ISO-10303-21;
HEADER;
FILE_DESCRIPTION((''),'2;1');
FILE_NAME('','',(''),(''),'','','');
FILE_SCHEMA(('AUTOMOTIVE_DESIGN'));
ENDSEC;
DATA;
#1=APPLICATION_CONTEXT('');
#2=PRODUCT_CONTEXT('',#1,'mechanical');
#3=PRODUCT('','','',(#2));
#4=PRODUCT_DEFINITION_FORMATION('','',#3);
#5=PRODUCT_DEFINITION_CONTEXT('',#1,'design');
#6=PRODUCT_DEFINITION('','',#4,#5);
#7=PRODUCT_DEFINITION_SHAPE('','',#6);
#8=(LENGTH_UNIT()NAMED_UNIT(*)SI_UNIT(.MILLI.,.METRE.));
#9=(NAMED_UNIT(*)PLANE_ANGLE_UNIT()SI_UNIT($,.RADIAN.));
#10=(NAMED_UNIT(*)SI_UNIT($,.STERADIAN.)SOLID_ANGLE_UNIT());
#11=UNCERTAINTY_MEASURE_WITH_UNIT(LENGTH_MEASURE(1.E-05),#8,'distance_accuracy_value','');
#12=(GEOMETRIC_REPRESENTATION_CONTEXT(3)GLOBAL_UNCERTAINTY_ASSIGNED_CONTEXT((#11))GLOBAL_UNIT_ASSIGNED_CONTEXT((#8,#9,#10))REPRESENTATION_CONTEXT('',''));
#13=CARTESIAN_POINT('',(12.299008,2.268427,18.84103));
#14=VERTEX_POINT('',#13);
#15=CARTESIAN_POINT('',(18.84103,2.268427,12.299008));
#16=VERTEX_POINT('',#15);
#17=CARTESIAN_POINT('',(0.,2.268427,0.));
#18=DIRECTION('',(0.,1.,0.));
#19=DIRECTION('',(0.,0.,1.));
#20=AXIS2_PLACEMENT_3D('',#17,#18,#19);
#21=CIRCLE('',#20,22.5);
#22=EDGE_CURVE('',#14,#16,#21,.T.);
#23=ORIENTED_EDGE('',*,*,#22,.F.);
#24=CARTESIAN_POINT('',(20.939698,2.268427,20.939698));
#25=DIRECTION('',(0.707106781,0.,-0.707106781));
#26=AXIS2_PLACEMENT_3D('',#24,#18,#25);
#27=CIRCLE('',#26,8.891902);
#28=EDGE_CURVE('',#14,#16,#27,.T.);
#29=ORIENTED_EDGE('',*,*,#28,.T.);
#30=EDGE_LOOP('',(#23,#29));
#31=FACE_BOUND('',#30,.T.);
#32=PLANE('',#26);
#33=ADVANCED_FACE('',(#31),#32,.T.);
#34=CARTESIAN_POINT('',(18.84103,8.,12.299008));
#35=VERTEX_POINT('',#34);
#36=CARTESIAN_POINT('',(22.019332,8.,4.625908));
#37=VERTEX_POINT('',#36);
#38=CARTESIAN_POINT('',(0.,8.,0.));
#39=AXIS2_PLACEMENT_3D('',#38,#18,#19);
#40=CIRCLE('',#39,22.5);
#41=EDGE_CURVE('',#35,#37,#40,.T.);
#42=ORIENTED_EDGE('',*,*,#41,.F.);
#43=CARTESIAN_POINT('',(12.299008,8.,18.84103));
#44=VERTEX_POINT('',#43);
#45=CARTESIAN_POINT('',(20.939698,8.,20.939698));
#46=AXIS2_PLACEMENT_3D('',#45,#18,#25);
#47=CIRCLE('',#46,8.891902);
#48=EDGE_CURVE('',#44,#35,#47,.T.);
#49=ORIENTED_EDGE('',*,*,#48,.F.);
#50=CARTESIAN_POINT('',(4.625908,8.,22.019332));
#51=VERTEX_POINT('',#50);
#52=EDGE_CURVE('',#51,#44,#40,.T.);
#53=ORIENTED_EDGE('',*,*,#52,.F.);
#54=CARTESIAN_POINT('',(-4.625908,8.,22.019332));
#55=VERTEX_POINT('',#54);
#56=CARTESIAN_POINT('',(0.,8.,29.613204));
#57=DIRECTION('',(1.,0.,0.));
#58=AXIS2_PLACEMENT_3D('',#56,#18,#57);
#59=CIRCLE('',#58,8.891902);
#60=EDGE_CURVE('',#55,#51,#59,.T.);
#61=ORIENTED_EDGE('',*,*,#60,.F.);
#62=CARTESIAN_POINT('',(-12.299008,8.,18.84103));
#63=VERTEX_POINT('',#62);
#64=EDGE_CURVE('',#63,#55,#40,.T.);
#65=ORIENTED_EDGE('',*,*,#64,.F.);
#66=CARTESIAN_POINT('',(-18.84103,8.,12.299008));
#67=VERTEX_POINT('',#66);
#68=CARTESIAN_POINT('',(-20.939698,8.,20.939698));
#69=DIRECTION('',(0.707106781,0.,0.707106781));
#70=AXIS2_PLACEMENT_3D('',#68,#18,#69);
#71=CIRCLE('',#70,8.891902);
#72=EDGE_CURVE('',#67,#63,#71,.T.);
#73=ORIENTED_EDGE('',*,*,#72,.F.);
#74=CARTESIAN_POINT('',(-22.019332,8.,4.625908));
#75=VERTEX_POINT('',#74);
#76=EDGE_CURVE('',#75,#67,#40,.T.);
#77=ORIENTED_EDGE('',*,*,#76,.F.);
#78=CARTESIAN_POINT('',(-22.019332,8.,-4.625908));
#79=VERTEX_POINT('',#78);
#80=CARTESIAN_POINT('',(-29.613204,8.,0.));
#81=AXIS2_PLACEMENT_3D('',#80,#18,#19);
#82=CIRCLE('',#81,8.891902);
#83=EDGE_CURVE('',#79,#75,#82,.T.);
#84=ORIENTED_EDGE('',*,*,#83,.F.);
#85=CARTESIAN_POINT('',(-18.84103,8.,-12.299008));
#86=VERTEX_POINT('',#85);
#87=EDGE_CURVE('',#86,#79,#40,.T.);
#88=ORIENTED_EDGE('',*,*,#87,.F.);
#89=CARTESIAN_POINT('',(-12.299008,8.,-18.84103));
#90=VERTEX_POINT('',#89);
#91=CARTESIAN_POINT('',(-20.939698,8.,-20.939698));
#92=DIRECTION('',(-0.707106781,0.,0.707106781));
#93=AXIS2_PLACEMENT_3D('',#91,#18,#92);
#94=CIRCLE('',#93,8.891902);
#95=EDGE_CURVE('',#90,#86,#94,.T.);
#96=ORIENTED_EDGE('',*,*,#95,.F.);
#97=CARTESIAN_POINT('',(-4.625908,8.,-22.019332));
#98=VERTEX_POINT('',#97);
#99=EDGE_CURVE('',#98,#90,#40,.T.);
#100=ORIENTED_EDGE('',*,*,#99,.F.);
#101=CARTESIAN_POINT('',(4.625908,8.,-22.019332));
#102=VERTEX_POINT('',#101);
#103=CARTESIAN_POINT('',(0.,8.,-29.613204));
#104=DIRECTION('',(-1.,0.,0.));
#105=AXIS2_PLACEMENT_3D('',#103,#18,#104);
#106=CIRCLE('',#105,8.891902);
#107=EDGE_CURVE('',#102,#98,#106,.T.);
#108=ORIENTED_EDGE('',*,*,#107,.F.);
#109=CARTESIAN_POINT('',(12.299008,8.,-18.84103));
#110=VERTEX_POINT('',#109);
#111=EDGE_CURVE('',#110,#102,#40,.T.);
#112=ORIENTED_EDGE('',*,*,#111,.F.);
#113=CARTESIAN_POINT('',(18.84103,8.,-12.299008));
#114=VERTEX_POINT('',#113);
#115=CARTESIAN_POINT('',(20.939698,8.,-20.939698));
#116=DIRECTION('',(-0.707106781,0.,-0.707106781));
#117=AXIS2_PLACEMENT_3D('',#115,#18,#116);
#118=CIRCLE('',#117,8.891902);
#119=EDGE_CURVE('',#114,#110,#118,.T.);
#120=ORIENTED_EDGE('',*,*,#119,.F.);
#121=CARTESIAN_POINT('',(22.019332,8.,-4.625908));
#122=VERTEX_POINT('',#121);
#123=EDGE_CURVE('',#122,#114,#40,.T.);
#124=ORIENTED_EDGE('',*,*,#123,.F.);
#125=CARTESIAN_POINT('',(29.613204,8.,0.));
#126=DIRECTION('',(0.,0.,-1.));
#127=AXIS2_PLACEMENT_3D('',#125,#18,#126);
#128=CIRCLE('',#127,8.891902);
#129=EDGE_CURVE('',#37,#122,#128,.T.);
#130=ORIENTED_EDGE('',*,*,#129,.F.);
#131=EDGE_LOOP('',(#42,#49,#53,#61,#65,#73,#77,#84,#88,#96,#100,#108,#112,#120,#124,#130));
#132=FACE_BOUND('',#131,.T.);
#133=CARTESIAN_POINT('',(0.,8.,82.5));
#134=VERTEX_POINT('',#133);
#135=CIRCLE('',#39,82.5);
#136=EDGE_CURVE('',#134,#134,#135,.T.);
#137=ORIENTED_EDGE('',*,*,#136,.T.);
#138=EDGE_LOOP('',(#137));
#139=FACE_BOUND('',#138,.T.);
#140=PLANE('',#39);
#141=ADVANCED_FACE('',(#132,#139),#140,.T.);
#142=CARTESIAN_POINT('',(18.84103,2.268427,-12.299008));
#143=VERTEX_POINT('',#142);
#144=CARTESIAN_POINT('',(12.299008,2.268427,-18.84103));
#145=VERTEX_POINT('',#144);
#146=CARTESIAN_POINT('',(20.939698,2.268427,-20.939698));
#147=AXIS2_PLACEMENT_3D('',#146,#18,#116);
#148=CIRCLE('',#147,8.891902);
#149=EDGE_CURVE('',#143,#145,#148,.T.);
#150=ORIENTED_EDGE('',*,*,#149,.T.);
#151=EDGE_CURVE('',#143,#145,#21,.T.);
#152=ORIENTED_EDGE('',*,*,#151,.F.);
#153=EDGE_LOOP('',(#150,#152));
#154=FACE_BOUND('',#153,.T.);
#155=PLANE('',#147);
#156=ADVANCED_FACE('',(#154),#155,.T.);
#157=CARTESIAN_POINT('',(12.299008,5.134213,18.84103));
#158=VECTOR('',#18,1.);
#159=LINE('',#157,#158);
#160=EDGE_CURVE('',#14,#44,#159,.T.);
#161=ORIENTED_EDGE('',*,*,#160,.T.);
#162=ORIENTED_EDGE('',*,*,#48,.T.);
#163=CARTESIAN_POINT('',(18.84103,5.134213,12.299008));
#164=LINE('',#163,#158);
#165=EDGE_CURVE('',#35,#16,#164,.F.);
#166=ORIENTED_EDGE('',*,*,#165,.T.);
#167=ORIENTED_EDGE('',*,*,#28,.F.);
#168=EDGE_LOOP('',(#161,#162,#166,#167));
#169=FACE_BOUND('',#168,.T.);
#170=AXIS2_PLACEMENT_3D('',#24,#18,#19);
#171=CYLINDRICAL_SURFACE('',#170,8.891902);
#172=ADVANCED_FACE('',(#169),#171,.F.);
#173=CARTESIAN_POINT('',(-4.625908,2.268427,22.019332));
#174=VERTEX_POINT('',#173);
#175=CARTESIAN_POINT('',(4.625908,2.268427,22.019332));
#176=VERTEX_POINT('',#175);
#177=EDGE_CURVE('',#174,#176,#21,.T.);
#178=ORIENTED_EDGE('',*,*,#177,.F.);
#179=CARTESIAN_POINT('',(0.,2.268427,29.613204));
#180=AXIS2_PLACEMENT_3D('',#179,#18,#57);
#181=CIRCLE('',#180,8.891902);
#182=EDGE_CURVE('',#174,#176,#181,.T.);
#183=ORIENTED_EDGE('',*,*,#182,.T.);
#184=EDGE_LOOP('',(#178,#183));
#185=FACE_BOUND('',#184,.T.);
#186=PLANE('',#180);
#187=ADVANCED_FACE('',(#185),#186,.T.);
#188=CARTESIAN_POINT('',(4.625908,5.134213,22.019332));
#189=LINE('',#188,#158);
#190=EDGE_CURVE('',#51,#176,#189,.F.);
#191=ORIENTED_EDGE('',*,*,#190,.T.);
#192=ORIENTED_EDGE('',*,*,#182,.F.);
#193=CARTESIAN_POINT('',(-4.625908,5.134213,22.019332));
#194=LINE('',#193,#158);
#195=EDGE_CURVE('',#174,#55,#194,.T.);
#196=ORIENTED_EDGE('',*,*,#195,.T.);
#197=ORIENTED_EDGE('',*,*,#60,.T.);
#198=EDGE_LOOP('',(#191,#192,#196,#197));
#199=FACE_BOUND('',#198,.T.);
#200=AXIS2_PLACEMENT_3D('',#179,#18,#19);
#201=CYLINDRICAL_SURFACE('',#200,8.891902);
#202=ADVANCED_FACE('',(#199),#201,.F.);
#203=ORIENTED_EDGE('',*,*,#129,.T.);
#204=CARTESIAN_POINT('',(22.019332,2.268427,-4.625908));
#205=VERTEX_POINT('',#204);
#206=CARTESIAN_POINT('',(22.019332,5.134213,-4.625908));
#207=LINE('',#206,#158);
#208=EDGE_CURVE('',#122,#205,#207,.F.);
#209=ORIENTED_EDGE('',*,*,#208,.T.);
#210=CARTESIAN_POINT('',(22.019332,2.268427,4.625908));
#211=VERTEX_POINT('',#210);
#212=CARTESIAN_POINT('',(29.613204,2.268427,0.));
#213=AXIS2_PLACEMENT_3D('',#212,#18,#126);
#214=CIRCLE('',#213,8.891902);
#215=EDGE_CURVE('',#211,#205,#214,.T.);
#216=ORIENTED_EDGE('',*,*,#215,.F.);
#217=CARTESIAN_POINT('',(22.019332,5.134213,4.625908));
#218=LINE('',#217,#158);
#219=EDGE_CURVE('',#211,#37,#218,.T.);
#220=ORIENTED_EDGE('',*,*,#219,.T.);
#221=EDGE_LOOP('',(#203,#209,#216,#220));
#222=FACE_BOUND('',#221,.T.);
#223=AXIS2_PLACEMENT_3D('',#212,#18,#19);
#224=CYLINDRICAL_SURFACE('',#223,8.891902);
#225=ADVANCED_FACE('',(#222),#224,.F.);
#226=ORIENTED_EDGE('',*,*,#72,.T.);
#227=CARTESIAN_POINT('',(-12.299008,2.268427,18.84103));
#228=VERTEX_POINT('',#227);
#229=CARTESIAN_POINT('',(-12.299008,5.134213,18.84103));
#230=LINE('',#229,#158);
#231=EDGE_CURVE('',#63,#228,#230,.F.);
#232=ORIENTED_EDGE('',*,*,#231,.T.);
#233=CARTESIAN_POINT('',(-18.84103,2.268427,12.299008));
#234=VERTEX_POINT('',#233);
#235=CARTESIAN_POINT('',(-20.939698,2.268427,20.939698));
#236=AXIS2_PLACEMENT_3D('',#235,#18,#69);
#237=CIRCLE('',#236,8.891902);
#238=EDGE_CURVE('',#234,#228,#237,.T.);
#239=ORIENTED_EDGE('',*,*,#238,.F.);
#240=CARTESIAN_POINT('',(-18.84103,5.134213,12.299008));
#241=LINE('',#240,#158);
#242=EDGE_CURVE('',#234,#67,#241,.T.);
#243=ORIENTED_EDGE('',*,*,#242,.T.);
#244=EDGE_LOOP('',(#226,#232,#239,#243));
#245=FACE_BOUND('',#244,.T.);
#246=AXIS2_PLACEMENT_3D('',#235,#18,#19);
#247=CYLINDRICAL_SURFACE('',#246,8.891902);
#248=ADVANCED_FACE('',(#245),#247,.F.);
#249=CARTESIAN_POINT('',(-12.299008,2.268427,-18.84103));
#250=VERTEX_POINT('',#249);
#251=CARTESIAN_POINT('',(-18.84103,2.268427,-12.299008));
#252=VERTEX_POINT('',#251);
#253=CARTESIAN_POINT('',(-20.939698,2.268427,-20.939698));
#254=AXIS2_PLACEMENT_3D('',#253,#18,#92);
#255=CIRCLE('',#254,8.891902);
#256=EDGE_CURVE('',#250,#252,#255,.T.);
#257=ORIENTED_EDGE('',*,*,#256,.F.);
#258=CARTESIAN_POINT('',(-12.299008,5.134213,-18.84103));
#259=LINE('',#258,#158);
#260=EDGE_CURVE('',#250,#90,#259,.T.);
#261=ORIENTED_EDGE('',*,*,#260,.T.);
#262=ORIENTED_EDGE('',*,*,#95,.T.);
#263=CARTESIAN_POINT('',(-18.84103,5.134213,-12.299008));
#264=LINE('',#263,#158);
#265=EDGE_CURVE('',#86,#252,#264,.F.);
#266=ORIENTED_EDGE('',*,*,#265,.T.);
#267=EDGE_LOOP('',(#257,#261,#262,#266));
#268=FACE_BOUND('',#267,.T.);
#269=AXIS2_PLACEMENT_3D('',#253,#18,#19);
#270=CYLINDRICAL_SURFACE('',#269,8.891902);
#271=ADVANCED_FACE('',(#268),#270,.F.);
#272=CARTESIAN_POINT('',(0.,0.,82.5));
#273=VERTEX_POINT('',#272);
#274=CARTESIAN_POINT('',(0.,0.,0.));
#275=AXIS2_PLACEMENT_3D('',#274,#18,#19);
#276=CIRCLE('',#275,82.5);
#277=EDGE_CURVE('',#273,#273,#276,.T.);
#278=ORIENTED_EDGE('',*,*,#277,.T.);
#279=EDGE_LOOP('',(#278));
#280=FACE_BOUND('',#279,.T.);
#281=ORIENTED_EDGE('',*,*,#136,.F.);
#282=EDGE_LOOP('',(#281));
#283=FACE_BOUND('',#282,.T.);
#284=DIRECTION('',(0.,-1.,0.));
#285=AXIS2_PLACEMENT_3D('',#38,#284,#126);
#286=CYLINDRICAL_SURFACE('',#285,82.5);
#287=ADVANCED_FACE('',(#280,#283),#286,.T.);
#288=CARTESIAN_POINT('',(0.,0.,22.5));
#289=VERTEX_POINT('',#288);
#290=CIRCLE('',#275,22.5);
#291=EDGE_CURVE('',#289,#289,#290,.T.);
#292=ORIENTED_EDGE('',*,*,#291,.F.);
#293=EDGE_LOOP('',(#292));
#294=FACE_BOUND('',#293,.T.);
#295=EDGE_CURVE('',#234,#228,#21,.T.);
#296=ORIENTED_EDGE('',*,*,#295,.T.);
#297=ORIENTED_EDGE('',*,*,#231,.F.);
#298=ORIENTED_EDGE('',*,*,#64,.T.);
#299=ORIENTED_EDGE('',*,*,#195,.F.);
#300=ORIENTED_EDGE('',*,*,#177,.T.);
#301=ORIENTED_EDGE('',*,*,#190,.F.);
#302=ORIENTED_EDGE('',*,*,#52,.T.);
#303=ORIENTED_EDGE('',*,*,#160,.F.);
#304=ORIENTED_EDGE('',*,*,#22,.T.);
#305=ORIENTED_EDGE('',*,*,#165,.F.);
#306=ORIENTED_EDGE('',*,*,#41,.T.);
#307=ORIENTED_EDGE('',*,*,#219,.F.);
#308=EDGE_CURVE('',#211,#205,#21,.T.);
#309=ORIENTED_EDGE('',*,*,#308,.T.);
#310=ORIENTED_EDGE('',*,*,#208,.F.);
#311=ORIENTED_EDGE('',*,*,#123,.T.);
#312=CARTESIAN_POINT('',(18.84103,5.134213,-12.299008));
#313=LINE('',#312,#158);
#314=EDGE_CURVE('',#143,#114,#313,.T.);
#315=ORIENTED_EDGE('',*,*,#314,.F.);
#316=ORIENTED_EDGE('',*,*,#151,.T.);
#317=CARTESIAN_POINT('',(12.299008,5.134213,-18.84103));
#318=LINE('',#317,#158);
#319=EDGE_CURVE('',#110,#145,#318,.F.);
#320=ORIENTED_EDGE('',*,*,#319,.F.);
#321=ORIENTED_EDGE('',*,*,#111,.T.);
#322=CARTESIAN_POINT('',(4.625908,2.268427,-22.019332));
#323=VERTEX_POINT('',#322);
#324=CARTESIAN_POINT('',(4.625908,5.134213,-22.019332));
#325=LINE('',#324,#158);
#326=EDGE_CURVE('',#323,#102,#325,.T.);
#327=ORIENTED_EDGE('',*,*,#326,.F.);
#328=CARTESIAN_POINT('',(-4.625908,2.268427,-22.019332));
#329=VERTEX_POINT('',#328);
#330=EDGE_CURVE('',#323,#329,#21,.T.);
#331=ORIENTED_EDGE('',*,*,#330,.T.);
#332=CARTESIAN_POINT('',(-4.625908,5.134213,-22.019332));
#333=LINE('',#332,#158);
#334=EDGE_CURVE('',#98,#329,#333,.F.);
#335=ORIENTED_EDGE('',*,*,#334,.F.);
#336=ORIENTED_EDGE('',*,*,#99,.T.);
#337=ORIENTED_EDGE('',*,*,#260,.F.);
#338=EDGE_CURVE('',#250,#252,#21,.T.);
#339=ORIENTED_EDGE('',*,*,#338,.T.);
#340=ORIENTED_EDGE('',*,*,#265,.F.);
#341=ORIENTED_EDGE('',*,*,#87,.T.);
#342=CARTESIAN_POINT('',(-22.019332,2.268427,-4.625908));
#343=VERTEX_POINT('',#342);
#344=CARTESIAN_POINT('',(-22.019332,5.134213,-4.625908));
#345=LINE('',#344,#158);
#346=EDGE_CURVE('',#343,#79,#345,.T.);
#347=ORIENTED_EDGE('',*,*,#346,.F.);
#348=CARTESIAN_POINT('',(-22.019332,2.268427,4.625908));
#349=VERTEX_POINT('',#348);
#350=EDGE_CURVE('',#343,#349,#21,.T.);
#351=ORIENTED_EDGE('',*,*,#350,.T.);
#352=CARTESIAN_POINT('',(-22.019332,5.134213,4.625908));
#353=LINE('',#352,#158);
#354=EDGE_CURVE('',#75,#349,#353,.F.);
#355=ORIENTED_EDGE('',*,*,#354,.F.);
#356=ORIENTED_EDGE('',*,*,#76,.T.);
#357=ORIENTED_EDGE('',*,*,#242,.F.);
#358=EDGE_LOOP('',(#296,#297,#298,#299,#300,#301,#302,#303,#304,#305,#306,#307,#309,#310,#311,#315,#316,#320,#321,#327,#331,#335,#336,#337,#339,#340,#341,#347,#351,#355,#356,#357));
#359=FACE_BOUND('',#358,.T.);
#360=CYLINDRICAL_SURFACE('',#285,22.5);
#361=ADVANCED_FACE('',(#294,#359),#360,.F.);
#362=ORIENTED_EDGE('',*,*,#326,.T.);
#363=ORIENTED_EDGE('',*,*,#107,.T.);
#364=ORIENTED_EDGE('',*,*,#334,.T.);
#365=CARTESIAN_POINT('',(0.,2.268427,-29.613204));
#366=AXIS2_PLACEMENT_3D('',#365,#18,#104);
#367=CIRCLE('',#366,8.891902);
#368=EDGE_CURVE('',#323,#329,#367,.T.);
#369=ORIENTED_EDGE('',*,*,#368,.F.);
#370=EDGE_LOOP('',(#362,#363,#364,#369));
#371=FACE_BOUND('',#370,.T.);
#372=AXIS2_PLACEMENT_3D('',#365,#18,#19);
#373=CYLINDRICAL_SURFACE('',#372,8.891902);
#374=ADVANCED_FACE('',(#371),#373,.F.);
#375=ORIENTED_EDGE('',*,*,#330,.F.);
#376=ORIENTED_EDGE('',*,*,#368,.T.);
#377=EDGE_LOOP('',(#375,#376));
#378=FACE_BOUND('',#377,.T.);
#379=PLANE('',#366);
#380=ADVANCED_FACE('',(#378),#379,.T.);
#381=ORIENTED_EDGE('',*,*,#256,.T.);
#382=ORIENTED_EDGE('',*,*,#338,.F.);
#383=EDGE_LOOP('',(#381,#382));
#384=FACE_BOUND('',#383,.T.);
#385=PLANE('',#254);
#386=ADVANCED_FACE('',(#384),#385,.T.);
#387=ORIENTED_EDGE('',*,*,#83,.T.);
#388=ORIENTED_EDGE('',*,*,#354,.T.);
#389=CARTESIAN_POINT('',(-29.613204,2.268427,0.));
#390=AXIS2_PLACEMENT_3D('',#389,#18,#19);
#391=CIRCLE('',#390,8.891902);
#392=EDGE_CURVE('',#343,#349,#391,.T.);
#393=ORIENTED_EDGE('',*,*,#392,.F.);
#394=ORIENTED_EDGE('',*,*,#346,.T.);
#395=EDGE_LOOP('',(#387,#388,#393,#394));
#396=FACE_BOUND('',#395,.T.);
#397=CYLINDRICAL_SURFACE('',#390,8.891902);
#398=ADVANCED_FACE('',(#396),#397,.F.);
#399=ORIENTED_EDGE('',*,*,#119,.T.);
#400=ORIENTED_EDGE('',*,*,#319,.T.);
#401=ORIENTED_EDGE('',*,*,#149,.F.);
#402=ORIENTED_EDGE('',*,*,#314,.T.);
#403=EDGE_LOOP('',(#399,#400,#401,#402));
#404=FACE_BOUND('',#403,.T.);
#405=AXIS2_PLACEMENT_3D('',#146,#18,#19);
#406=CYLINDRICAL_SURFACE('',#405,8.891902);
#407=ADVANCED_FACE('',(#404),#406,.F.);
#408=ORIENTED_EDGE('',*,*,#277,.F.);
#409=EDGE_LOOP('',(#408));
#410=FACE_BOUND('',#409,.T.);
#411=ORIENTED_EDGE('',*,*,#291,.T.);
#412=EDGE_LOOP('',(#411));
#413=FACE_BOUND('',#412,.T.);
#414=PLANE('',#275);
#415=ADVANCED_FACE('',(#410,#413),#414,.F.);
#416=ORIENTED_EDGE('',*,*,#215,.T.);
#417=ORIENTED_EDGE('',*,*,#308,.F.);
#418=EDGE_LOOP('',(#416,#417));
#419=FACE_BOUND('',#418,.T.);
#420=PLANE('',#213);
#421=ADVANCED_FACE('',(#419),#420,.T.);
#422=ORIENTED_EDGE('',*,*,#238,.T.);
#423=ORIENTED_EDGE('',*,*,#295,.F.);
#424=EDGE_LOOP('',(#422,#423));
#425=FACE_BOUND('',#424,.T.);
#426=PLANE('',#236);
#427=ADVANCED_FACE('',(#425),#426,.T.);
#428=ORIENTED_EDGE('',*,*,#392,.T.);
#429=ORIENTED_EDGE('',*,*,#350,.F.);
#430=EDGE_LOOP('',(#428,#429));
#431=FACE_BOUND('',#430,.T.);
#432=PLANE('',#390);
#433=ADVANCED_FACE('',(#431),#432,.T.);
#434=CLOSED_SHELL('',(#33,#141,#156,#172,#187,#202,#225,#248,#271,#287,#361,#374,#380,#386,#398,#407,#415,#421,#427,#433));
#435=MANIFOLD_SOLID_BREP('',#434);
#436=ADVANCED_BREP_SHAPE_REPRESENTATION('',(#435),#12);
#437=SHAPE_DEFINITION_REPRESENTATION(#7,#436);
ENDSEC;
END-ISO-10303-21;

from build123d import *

# Parameters (mm, degrees)
SKETCH1_R           = 82.5
BOSS_EXTRUDE1_DEPTH = 8
SKETCH2_R           = 22.5
CUT_EXTRUDE1_DEPTH  = 117.946568996
SKETCH3_R           = 8.891902411
CUT_EXTRUDE2_DEPTH  = 5.731573304
CIRPATTERN1_COUNT   = 8


with BuildPart() as part:
    # Sketch1 → Boss-Extrude1 (new body)
    with BuildSketch(Plane(origin=(0, 0, 0), x_dir=(1, 0, 0), z_dir=(0, 1, 0))):
        Circle(SKETCH1_R)
    extrude(amount=BOSS_EXTRUDE1_DEPTH)

    # Sketch2 → Cut-Extrude1 (cut, through all)
    with BuildSketch(Plane(origin=(0, 0, 0), x_dir=(1, 0, 0), z_dir=(0, 1, 0))):
        Circle(SKETCH2_R)
    extrude(amount=CUT_EXTRUDE1_DEPTH, mode=Mode.SUBTRACT)

    # Sketch3 → Cut-Extrude2 (cut)
    with BuildSketch(Plane(origin=(0, 8, 0), x_dir=(1, 0, 0), z_dir=(0, 1, 0))):
        with Locations((-29.613204402, 0)):
            Circle(SKETCH3_R)
    cut_extrude2 = extrude(amount=-CUT_EXTRUDE2_DEPTH, mode=Mode.SUBTRACT)

    # CirPattern1: Cut-Extrude2 ×8 about axis
    cirpattern1_axis = Axis((0, 0, 0), (0, 1, 0))
    for i in range(1, CIRPATTERN1_COUNT):
        add(cut_extrude2.rotate(cirpattern1_axis, i * 360 / CIRPATTERN1_COUNT), mode=Mode.SUBTRACT)


solid = part.part
